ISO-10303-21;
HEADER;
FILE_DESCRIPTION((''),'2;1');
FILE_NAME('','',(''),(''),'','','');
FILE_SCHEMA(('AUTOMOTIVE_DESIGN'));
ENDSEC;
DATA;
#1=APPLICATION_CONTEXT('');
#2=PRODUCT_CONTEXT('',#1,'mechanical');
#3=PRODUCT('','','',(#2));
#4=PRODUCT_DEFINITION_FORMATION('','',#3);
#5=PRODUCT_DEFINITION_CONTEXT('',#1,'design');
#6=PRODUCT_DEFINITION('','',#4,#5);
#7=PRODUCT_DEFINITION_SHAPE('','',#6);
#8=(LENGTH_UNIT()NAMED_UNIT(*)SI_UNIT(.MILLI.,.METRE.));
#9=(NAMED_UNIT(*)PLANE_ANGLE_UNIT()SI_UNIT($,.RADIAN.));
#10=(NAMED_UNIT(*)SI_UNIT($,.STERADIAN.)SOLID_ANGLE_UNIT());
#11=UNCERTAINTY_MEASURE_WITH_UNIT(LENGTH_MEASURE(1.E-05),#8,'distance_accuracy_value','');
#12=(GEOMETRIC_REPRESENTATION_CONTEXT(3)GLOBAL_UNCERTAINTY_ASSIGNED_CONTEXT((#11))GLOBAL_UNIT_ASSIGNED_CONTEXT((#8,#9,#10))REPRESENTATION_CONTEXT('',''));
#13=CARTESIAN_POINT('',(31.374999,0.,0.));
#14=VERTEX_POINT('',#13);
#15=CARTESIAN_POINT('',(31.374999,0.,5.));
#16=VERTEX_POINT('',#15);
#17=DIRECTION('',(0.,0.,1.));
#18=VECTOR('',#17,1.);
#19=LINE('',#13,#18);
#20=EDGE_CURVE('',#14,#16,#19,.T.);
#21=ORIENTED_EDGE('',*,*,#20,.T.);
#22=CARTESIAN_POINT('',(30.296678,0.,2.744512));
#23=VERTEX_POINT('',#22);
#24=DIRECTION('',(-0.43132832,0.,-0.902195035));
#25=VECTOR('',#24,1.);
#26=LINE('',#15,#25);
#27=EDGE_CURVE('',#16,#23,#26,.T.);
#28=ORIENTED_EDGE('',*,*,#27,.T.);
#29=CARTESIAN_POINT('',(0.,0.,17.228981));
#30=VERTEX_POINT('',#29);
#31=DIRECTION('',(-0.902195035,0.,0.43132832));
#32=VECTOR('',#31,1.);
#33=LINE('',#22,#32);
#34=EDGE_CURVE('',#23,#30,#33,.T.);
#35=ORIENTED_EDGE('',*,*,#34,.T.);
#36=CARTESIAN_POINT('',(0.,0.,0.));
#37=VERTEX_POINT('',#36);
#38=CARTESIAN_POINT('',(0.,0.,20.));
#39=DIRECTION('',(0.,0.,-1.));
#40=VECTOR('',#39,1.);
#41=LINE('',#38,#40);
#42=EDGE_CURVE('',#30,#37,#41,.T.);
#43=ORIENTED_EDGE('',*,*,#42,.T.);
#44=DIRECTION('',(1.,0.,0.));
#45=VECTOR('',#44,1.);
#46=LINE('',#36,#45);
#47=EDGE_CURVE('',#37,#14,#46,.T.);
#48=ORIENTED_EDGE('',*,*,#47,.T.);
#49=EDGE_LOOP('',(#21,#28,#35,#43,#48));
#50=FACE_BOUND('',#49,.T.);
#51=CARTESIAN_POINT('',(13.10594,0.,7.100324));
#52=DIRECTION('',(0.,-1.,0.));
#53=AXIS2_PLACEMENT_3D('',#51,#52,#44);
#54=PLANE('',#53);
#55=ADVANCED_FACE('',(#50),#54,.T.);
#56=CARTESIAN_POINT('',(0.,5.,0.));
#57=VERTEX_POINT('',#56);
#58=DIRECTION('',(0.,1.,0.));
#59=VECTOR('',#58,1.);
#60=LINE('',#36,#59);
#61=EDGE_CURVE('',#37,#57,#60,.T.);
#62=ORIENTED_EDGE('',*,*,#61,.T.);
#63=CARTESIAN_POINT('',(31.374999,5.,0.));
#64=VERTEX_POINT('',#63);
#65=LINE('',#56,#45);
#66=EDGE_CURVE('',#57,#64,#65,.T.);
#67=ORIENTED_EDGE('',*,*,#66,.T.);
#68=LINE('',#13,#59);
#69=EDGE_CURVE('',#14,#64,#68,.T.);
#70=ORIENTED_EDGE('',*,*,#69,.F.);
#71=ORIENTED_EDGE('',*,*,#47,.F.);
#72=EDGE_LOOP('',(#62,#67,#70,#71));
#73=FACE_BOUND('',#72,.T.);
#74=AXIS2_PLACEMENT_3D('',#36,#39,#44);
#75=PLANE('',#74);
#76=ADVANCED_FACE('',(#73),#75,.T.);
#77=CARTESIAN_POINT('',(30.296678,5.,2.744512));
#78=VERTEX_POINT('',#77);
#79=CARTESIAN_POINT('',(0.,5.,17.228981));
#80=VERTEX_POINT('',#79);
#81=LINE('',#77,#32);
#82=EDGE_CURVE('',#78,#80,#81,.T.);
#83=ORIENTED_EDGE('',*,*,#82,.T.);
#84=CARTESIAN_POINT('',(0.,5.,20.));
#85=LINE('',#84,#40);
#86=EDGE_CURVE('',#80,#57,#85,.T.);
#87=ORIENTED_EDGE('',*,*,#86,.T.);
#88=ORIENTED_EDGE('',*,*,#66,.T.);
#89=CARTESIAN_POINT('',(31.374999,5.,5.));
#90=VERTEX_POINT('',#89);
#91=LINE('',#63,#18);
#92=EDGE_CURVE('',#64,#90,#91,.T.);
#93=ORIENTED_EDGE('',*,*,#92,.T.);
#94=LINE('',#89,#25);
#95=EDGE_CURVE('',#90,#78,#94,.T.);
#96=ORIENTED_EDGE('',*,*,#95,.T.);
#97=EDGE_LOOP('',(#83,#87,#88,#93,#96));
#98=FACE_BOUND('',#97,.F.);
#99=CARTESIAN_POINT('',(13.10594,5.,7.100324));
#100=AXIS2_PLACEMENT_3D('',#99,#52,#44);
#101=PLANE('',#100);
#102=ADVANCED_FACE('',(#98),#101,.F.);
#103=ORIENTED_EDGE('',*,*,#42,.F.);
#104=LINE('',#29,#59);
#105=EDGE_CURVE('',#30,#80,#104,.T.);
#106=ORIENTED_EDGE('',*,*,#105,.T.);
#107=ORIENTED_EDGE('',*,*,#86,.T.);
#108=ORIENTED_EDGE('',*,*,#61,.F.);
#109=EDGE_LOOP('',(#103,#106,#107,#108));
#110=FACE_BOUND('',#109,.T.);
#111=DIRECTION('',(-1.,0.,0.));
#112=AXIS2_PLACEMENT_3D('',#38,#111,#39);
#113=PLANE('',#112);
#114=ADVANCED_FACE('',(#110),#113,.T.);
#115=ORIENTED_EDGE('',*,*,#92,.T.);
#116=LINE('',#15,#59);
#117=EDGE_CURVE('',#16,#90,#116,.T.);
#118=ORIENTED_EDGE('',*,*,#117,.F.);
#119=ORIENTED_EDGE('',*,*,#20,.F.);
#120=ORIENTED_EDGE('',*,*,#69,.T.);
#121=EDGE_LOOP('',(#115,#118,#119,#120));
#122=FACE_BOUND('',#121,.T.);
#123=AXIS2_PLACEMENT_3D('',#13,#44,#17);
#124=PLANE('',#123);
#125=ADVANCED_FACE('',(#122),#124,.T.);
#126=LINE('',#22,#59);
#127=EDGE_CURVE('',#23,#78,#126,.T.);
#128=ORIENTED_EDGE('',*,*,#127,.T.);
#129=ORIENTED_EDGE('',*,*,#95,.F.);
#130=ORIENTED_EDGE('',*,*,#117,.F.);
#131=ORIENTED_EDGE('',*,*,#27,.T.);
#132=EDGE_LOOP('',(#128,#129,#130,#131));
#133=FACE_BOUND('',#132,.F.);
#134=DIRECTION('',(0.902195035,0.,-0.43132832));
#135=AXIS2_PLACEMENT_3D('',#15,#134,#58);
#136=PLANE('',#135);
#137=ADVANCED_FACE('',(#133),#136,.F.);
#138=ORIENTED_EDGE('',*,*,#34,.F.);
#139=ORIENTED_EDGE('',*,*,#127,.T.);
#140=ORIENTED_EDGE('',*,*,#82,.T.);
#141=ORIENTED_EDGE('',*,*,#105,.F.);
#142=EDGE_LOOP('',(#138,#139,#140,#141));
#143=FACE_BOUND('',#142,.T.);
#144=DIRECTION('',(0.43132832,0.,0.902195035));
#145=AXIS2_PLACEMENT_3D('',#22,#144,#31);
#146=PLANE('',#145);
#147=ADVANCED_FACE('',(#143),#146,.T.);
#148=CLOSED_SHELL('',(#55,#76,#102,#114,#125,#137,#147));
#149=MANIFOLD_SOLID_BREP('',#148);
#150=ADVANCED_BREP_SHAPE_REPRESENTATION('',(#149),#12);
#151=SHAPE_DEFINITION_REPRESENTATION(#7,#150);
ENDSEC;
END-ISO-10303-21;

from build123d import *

# Parameters (mm, degrees)
F1_DEPTH = 5
F2_DEPTH = 2.5


with BuildPart() as f1:
    # F0 (on Front) → F1 (new body)
    with BuildSketch(Plane.XZ):
        Polygon((0, 20), (0, 0), (31.3749988316, 0), (31.3749988316, 5), align=None)
    extrude(amount=-F1_DEPTH)

    # F2 (cut): a face of the model
    f2_faces = [f1.faces().sort_by_distance(p)[0] for p in [
        (15.6874994158, 2.5, 12.5),
    ]]
    extrude(f2_faces, amount=-F2_DEPTH, mode=Mode.SUBTRACT)


solid = f1.part
